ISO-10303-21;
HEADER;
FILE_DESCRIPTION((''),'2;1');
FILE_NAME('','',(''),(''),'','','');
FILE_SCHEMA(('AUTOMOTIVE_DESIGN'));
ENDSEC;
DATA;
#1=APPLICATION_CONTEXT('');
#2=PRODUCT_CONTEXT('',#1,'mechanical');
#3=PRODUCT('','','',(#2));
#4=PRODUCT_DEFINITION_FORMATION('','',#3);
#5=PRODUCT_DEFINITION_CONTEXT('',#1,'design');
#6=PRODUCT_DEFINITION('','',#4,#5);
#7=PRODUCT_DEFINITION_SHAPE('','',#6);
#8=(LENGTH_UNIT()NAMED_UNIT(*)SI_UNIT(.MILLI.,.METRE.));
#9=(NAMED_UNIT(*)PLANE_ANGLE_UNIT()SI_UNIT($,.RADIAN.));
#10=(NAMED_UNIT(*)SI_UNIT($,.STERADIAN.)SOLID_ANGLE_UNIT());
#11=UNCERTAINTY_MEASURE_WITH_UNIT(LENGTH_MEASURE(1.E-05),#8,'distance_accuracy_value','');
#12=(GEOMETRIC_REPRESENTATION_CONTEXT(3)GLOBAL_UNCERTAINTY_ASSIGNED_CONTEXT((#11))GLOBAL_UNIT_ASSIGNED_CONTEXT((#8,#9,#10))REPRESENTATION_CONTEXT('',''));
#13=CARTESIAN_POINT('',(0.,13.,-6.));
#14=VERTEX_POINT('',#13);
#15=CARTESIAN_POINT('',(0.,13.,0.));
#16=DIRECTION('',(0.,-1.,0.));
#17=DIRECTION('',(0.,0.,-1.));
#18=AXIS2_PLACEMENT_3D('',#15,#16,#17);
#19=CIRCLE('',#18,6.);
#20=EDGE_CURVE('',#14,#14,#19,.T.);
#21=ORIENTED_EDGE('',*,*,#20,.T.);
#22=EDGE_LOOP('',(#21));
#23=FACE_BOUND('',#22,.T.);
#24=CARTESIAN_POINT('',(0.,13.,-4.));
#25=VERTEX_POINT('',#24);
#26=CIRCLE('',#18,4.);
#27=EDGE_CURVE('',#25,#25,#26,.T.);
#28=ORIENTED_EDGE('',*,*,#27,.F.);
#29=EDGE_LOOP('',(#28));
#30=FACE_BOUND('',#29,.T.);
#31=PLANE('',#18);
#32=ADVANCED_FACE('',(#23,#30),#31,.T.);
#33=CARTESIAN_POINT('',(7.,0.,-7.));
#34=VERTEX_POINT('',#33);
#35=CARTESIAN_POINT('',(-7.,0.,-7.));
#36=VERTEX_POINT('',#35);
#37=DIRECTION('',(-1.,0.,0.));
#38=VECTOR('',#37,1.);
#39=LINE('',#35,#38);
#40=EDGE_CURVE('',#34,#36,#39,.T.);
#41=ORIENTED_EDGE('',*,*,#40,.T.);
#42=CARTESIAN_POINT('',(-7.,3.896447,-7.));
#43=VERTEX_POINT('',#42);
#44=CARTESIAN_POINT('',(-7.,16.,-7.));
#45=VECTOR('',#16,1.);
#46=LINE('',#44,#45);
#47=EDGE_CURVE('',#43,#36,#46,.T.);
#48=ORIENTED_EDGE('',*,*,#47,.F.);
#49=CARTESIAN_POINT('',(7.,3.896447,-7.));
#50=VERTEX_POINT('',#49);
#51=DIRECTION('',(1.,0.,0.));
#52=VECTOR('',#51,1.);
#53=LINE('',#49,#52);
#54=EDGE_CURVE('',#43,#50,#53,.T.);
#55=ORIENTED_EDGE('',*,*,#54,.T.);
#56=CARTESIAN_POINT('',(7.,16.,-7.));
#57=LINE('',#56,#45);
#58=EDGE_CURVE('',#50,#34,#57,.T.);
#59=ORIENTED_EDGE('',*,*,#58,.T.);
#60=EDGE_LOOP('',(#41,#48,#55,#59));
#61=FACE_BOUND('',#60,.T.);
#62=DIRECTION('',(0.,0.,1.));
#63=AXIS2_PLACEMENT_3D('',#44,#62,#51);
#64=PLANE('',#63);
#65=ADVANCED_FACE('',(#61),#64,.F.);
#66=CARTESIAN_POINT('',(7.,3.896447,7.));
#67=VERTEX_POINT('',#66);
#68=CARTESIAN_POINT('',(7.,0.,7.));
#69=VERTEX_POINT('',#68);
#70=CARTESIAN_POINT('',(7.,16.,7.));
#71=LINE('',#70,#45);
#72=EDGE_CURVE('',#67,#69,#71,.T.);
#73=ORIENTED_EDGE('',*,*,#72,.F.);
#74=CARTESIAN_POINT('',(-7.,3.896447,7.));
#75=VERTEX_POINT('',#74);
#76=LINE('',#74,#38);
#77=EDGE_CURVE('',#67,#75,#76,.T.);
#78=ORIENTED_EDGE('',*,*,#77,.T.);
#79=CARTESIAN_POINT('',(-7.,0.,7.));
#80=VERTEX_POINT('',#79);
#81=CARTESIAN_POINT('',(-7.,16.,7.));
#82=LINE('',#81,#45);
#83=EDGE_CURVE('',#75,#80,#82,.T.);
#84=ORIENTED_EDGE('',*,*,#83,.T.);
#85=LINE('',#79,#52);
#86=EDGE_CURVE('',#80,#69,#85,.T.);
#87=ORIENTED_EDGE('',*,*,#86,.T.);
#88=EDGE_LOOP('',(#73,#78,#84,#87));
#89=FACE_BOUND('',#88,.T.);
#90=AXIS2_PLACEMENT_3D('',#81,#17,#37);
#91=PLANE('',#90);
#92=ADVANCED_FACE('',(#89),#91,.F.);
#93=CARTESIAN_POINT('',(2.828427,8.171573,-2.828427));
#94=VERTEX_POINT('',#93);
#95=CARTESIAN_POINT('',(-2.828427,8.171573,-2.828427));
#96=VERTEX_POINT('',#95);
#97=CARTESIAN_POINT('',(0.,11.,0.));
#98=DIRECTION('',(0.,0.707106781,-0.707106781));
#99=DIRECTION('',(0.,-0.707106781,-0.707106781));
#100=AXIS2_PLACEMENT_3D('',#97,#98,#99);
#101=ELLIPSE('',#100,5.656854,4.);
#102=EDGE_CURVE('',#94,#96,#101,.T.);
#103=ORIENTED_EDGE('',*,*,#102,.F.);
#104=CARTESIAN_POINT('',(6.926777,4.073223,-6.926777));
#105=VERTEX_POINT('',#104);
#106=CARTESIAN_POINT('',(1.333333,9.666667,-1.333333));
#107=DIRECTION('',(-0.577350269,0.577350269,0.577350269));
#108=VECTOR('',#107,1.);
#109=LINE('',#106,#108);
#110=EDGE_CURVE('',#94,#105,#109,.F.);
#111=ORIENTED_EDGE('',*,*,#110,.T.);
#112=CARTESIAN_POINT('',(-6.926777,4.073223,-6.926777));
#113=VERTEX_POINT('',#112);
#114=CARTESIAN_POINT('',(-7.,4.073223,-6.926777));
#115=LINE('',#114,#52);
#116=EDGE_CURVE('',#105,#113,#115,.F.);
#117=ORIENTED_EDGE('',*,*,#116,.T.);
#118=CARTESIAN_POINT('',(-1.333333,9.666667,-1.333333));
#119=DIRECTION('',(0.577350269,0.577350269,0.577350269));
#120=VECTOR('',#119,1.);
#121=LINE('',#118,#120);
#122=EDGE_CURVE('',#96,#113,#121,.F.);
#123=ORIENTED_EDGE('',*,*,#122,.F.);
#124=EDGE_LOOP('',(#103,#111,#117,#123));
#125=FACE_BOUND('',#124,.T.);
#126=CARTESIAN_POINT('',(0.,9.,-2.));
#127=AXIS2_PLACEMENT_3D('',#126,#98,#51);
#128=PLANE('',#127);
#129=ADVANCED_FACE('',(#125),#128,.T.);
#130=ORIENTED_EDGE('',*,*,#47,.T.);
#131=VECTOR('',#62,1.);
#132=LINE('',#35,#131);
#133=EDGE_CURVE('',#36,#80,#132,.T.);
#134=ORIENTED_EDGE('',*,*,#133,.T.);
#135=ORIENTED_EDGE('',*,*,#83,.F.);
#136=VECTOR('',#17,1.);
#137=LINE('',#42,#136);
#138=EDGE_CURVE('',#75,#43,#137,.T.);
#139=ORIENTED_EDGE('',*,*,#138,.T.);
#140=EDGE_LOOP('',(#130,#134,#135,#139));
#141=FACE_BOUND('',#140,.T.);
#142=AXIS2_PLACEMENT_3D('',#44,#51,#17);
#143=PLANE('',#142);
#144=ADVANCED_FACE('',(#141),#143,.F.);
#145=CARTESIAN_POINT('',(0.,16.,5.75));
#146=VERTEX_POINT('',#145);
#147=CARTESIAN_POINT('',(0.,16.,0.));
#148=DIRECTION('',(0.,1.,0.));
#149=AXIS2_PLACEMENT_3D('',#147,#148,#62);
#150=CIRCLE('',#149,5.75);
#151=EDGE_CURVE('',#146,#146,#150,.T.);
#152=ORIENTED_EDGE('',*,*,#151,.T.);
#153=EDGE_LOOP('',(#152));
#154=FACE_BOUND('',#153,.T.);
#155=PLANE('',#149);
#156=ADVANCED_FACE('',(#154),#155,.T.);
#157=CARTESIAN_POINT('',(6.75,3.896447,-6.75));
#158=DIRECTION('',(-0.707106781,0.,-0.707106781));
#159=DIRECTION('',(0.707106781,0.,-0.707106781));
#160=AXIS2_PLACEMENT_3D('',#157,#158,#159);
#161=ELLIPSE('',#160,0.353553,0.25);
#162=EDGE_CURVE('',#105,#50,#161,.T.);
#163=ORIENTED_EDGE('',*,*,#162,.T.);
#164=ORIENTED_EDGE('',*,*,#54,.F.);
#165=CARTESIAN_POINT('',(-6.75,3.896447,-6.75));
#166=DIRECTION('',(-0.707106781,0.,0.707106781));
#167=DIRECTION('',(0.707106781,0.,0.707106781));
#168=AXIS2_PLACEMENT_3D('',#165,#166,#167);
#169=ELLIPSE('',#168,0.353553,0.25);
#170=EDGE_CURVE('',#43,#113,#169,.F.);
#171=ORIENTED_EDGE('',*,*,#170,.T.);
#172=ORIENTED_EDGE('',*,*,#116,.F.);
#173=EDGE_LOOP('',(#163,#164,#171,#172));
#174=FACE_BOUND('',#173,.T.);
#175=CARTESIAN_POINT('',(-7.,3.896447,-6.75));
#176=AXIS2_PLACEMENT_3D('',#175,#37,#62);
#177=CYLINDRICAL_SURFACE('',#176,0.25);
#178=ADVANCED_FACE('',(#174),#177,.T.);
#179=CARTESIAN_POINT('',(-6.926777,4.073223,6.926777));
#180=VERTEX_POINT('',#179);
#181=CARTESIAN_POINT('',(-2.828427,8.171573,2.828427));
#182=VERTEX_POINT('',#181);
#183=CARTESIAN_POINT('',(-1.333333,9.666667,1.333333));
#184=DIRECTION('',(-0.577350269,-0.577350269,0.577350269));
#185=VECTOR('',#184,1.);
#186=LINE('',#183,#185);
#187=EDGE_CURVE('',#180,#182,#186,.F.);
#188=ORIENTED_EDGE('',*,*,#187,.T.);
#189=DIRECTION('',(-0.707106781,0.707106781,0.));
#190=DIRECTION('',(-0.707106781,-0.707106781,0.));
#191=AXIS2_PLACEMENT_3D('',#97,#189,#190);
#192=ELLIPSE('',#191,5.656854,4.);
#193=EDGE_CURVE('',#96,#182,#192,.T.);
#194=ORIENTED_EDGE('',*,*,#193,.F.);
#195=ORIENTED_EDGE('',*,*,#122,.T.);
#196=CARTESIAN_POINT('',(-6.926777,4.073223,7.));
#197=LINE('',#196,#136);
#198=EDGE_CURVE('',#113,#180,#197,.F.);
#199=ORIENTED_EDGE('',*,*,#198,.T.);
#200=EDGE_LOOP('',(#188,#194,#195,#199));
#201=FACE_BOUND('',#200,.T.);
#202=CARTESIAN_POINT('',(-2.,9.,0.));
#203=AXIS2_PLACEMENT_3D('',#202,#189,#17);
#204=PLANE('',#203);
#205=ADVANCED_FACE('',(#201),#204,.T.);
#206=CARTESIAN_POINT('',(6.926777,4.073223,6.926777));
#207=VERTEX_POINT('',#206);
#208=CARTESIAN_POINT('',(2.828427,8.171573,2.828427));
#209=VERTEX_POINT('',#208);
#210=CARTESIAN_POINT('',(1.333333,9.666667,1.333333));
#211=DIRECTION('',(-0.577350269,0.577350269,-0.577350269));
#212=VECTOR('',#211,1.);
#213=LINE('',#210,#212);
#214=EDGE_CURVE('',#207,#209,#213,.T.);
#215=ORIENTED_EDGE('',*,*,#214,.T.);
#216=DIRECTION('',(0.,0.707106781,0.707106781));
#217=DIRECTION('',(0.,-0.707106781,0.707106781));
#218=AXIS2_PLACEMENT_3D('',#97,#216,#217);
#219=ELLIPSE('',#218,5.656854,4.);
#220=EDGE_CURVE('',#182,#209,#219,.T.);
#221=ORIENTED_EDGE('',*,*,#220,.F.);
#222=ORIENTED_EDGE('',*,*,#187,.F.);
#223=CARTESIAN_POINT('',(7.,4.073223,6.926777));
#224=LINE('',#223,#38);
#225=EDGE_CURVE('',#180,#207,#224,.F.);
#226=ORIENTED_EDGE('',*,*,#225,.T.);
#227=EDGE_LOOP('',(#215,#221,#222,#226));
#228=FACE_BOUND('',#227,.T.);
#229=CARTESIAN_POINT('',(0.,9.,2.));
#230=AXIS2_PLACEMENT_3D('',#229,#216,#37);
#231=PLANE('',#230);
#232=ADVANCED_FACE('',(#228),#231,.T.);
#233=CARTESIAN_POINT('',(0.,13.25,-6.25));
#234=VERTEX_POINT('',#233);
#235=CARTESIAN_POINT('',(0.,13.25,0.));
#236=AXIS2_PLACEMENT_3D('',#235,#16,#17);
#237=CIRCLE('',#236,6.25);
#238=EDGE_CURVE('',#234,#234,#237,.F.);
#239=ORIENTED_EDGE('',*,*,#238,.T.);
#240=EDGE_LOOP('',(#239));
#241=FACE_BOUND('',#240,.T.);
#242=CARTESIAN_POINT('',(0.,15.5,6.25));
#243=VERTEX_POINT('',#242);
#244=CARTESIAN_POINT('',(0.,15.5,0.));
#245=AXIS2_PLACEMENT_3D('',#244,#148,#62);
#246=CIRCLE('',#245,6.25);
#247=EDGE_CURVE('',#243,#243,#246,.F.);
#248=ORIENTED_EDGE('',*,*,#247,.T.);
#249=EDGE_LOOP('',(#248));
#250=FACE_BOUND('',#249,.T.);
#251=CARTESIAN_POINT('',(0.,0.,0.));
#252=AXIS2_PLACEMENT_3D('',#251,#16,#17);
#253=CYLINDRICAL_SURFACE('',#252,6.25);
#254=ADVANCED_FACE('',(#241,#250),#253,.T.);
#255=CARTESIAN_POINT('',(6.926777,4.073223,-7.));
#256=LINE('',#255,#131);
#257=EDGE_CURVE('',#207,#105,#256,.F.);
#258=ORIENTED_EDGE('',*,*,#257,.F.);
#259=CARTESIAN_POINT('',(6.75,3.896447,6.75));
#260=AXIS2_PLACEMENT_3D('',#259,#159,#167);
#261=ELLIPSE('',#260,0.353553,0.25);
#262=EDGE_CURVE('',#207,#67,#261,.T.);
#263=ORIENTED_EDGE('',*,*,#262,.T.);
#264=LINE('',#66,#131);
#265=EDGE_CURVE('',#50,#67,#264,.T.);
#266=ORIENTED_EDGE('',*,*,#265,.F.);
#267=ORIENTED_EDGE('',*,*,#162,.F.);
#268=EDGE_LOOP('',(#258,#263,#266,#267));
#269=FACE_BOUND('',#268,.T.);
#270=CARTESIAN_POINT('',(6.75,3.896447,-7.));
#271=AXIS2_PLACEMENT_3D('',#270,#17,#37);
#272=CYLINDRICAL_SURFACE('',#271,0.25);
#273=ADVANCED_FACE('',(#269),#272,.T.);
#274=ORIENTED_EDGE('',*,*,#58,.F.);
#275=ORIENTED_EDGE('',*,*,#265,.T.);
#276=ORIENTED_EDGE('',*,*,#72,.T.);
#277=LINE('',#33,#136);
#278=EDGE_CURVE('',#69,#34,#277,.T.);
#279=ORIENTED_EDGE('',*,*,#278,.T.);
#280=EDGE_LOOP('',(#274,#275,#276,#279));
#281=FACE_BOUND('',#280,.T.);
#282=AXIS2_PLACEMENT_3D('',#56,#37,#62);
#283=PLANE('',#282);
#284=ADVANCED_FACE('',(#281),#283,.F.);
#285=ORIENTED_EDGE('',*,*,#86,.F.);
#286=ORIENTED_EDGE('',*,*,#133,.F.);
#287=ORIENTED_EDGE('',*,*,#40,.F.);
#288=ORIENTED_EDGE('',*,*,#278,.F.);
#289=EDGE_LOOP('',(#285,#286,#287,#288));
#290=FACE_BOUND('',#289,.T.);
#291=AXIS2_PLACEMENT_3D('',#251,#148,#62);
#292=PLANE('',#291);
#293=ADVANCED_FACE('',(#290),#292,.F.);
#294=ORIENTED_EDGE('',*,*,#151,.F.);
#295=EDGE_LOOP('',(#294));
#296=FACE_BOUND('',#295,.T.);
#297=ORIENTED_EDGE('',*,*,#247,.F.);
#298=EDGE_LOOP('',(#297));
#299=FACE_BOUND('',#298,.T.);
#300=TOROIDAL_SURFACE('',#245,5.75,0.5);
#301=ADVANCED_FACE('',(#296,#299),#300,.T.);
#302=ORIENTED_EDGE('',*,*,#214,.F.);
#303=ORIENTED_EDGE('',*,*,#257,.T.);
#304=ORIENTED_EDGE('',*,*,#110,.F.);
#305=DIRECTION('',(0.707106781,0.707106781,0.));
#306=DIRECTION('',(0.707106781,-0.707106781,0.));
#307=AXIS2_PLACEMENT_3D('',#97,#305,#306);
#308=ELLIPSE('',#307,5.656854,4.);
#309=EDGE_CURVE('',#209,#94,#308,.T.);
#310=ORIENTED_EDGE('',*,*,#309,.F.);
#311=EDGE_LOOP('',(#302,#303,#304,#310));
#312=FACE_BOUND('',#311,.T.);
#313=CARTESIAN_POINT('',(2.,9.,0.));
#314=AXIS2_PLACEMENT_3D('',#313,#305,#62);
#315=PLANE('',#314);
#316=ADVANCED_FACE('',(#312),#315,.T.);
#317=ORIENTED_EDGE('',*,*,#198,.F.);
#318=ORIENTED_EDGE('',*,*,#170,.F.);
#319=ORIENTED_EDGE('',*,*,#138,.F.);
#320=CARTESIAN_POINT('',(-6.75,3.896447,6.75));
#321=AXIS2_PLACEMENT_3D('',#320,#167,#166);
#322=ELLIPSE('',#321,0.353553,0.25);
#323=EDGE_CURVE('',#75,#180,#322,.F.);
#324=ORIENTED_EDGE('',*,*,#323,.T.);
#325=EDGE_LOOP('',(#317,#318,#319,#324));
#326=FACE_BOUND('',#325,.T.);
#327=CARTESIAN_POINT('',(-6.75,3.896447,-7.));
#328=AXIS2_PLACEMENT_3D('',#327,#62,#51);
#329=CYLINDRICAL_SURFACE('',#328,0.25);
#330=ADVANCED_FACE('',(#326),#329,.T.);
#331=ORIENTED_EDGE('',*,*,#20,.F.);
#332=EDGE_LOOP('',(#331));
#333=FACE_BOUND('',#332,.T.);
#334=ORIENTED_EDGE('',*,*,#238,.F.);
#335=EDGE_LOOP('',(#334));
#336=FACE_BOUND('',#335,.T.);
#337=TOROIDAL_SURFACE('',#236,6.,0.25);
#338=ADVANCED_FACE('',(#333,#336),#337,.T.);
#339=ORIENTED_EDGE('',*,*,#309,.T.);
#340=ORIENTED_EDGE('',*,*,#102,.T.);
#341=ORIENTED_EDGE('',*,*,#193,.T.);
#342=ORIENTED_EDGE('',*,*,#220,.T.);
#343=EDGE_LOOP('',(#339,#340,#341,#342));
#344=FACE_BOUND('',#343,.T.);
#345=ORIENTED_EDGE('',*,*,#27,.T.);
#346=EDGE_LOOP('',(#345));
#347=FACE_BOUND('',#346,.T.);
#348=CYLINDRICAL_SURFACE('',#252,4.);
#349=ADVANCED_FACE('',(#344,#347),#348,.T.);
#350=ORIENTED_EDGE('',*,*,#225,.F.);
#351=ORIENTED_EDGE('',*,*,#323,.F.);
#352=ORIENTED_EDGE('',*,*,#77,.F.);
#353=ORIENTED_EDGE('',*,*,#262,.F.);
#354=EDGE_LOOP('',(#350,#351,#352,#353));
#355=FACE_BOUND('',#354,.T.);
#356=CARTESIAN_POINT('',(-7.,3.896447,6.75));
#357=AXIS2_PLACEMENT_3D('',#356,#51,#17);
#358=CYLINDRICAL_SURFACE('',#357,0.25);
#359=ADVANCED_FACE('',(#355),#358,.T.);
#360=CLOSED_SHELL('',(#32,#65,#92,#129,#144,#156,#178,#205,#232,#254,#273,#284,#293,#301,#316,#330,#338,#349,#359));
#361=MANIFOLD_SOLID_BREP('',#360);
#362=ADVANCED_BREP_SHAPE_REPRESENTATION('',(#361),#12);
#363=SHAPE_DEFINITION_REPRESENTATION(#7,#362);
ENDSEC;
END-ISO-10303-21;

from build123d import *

# Parameters (mm, degrees)
SKIZZE1_W                       = 14
SKIZZE1_H                       = 14
AUFSATZ_LINEAR_AUSTRAGEN1_DEPTH = 16
FASE1_SIZE                      = 5
VERRUNDUNG2_R                   = 0.5
VERRUNDUNG3_R                   = 0.25
VERRUNDUNG4_R                   = 0.25


with BuildPart() as part:
    # Skizze1 → Aufsatz-Linear austragen1 (new body)
    with BuildSketch(Plane(origin=(0, 0, 0), x_dir=(1, 0, 0), z_dir=(0, 1, 0))):
        Rectangle(SKIZZE1_W, SKIZZE1_H)
    extrude(amount=AUFSATZ_LINEAR_AUSTRAGEN1_DEPTH)

    # Skizze6 → Schnitt-Rotation4 (revolve, cut)
    with BuildSketch(Plane(origin=(0, 0, 0), x_dir=(0, 0, -1), z_dir=(1, 0, 0))):
        Polygon((6.25, 16), (13.25, 16), (13.25, 9), (4, 9), (4, 13), (6.25, 13), align=None)
    revolve(axis=Axis((0, 0, 0), (0, 1, 0)), mode=Mode.SUBTRACT)

    # Fase1
    # the kernel refuses this chamfer: 5 mm, written as the material it takes off along each edge
    with BuildSketch(Plane(origin=(-7, 9, 19.85841494), x_dir=(0.9996219169112968, 0.027495876610586317, 0), z_dir=(0, 0, -1))) as fase1_piece_1_section:
        Polygon((FASE1_SIZE * 0.999621916911, FASE1_SIZE * 0.0274958766106), (-FASE1_SIZE * 0.0274958766106, FASE1_SIZE * 0.999621916911), (0, 0), align=None)
    fase1_piece_1 = extrude(amount=39.71682988, mode=Mode.PRIVATE)
    fase1_piece_1 = fase1_piece_1 - Plane(origin=(0, 7.328837599, 0), x_dir=(0, 0, -1), z_dir=(0, 1, 0)) * Cylinder(4, 100, mode=Mode.PRIVATE)
    add(fase1_piece_1, mode=Mode.SUBTRACT)
    with BuildSketch(Plane(origin=(-19.85841494, 9, -7), x_dir=(0, -0.9996219169112968, -0.027495876610586317), z_dir=(1, 0, 0))) as fase1_piece_2_section:
        Polygon((FASE1_SIZE * 0.999621916911, -FASE1_SIZE * 0.0274958766106), (-FASE1_SIZE * 0.0274958766106, -FASE1_SIZE * 0.999621916911), (0, 0), align=None)
    fase1_piece_2 = extrude(amount=39.71682988, mode=Mode.PRIVATE)
    fase1_piece_2 = fase1_piece_2 - Plane(origin=(0, 7.328837565, 0), x_dir=(0, 0, -1), z_dir=(0, 1, 0)) * Cylinder(4, 100, mode=Mode.PRIVATE)
    add(fase1_piece_2, mode=Mode.SUBTRACT)
    with BuildSketch(Plane(origin=(7, 9, -19.85841494), x_dir=(0.027495876610586317, -0.9996219169112968, 0), z_dir=(0, 0, 1))) as fase1_piece_3_section:
        Polygon((FASE1_SIZE * 0.999621916911, -FASE1_SIZE * 0.0274958766106), (-FASE1_SIZE * 0.0274958766106, -FASE1_SIZE * 0.999621916911), (0, 0), align=None)
    fase1_piece_3 = extrude(amount=39.71682988, mode=Mode.PRIVATE)
    fase1_piece_3 = fase1_piece_3 - Plane(origin=(0, 7.328837548, 0), x_dir=(0, 0, -1), z_dir=(0, 1, 0)) * Cylinder(4, 100, mode=Mode.PRIVATE)
    add(fase1_piece_3, mode=Mode.SUBTRACT)
    with BuildSketch(Plane(origin=(19.85841494, 9, 7), x_dir=(0, 0.027495876610586317, -0.9996219169112968), z_dir=(-1, 0, 0))) as fase1_piece_4_section:
        Polygon((FASE1_SIZE * 0.999621916911, FASE1_SIZE * 0.0274958766106), (-FASE1_SIZE * 0.0274958766106, FASE1_SIZE * 0.999621916911), (0, 0), align=None)
    fase1_piece_4 = extrude(amount=39.71682988, mode=Mode.PRIVATE)
    fase1_piece_4 = fase1_piece_4 - Plane(origin=(0, 7.328837599, 0), x_dir=(0, 0, -1), z_dir=(0, 1, 0)) * Cylinder(4, 100, mode=Mode.PRIVATE)
    add(fase1_piece_4, mode=Mode.SUBTRACT)

    # Verrundung2
    verrundung2_edges = [part.edges().sort_by_distance(p)[0] for p in [
        (0, 16, 6.25),
    ]]
    fillet(verrundung2_edges, radius=VERRUNDUNG2_R)

    # Verrundung3
    verrundung3_edges = [part.edges().sort_by_distance(p)[0] for p in [
        (-7, 4, 0),
        (0, 4, -7),
        (7, 4, 0),
        (0, 4, 7),
    ]]
    fillet(verrundung3_edges, radius=VERRUNDUNG3_R)

    # Verrundung4
    verrundung4_edges = [part.edges().sort_by_distance(p)[0] for p in [
        (0, 13, 6.25),
    ]]
    fillet(verrundung4_edges, radius=VERRUNDUNG4_R)


solid = part.part
